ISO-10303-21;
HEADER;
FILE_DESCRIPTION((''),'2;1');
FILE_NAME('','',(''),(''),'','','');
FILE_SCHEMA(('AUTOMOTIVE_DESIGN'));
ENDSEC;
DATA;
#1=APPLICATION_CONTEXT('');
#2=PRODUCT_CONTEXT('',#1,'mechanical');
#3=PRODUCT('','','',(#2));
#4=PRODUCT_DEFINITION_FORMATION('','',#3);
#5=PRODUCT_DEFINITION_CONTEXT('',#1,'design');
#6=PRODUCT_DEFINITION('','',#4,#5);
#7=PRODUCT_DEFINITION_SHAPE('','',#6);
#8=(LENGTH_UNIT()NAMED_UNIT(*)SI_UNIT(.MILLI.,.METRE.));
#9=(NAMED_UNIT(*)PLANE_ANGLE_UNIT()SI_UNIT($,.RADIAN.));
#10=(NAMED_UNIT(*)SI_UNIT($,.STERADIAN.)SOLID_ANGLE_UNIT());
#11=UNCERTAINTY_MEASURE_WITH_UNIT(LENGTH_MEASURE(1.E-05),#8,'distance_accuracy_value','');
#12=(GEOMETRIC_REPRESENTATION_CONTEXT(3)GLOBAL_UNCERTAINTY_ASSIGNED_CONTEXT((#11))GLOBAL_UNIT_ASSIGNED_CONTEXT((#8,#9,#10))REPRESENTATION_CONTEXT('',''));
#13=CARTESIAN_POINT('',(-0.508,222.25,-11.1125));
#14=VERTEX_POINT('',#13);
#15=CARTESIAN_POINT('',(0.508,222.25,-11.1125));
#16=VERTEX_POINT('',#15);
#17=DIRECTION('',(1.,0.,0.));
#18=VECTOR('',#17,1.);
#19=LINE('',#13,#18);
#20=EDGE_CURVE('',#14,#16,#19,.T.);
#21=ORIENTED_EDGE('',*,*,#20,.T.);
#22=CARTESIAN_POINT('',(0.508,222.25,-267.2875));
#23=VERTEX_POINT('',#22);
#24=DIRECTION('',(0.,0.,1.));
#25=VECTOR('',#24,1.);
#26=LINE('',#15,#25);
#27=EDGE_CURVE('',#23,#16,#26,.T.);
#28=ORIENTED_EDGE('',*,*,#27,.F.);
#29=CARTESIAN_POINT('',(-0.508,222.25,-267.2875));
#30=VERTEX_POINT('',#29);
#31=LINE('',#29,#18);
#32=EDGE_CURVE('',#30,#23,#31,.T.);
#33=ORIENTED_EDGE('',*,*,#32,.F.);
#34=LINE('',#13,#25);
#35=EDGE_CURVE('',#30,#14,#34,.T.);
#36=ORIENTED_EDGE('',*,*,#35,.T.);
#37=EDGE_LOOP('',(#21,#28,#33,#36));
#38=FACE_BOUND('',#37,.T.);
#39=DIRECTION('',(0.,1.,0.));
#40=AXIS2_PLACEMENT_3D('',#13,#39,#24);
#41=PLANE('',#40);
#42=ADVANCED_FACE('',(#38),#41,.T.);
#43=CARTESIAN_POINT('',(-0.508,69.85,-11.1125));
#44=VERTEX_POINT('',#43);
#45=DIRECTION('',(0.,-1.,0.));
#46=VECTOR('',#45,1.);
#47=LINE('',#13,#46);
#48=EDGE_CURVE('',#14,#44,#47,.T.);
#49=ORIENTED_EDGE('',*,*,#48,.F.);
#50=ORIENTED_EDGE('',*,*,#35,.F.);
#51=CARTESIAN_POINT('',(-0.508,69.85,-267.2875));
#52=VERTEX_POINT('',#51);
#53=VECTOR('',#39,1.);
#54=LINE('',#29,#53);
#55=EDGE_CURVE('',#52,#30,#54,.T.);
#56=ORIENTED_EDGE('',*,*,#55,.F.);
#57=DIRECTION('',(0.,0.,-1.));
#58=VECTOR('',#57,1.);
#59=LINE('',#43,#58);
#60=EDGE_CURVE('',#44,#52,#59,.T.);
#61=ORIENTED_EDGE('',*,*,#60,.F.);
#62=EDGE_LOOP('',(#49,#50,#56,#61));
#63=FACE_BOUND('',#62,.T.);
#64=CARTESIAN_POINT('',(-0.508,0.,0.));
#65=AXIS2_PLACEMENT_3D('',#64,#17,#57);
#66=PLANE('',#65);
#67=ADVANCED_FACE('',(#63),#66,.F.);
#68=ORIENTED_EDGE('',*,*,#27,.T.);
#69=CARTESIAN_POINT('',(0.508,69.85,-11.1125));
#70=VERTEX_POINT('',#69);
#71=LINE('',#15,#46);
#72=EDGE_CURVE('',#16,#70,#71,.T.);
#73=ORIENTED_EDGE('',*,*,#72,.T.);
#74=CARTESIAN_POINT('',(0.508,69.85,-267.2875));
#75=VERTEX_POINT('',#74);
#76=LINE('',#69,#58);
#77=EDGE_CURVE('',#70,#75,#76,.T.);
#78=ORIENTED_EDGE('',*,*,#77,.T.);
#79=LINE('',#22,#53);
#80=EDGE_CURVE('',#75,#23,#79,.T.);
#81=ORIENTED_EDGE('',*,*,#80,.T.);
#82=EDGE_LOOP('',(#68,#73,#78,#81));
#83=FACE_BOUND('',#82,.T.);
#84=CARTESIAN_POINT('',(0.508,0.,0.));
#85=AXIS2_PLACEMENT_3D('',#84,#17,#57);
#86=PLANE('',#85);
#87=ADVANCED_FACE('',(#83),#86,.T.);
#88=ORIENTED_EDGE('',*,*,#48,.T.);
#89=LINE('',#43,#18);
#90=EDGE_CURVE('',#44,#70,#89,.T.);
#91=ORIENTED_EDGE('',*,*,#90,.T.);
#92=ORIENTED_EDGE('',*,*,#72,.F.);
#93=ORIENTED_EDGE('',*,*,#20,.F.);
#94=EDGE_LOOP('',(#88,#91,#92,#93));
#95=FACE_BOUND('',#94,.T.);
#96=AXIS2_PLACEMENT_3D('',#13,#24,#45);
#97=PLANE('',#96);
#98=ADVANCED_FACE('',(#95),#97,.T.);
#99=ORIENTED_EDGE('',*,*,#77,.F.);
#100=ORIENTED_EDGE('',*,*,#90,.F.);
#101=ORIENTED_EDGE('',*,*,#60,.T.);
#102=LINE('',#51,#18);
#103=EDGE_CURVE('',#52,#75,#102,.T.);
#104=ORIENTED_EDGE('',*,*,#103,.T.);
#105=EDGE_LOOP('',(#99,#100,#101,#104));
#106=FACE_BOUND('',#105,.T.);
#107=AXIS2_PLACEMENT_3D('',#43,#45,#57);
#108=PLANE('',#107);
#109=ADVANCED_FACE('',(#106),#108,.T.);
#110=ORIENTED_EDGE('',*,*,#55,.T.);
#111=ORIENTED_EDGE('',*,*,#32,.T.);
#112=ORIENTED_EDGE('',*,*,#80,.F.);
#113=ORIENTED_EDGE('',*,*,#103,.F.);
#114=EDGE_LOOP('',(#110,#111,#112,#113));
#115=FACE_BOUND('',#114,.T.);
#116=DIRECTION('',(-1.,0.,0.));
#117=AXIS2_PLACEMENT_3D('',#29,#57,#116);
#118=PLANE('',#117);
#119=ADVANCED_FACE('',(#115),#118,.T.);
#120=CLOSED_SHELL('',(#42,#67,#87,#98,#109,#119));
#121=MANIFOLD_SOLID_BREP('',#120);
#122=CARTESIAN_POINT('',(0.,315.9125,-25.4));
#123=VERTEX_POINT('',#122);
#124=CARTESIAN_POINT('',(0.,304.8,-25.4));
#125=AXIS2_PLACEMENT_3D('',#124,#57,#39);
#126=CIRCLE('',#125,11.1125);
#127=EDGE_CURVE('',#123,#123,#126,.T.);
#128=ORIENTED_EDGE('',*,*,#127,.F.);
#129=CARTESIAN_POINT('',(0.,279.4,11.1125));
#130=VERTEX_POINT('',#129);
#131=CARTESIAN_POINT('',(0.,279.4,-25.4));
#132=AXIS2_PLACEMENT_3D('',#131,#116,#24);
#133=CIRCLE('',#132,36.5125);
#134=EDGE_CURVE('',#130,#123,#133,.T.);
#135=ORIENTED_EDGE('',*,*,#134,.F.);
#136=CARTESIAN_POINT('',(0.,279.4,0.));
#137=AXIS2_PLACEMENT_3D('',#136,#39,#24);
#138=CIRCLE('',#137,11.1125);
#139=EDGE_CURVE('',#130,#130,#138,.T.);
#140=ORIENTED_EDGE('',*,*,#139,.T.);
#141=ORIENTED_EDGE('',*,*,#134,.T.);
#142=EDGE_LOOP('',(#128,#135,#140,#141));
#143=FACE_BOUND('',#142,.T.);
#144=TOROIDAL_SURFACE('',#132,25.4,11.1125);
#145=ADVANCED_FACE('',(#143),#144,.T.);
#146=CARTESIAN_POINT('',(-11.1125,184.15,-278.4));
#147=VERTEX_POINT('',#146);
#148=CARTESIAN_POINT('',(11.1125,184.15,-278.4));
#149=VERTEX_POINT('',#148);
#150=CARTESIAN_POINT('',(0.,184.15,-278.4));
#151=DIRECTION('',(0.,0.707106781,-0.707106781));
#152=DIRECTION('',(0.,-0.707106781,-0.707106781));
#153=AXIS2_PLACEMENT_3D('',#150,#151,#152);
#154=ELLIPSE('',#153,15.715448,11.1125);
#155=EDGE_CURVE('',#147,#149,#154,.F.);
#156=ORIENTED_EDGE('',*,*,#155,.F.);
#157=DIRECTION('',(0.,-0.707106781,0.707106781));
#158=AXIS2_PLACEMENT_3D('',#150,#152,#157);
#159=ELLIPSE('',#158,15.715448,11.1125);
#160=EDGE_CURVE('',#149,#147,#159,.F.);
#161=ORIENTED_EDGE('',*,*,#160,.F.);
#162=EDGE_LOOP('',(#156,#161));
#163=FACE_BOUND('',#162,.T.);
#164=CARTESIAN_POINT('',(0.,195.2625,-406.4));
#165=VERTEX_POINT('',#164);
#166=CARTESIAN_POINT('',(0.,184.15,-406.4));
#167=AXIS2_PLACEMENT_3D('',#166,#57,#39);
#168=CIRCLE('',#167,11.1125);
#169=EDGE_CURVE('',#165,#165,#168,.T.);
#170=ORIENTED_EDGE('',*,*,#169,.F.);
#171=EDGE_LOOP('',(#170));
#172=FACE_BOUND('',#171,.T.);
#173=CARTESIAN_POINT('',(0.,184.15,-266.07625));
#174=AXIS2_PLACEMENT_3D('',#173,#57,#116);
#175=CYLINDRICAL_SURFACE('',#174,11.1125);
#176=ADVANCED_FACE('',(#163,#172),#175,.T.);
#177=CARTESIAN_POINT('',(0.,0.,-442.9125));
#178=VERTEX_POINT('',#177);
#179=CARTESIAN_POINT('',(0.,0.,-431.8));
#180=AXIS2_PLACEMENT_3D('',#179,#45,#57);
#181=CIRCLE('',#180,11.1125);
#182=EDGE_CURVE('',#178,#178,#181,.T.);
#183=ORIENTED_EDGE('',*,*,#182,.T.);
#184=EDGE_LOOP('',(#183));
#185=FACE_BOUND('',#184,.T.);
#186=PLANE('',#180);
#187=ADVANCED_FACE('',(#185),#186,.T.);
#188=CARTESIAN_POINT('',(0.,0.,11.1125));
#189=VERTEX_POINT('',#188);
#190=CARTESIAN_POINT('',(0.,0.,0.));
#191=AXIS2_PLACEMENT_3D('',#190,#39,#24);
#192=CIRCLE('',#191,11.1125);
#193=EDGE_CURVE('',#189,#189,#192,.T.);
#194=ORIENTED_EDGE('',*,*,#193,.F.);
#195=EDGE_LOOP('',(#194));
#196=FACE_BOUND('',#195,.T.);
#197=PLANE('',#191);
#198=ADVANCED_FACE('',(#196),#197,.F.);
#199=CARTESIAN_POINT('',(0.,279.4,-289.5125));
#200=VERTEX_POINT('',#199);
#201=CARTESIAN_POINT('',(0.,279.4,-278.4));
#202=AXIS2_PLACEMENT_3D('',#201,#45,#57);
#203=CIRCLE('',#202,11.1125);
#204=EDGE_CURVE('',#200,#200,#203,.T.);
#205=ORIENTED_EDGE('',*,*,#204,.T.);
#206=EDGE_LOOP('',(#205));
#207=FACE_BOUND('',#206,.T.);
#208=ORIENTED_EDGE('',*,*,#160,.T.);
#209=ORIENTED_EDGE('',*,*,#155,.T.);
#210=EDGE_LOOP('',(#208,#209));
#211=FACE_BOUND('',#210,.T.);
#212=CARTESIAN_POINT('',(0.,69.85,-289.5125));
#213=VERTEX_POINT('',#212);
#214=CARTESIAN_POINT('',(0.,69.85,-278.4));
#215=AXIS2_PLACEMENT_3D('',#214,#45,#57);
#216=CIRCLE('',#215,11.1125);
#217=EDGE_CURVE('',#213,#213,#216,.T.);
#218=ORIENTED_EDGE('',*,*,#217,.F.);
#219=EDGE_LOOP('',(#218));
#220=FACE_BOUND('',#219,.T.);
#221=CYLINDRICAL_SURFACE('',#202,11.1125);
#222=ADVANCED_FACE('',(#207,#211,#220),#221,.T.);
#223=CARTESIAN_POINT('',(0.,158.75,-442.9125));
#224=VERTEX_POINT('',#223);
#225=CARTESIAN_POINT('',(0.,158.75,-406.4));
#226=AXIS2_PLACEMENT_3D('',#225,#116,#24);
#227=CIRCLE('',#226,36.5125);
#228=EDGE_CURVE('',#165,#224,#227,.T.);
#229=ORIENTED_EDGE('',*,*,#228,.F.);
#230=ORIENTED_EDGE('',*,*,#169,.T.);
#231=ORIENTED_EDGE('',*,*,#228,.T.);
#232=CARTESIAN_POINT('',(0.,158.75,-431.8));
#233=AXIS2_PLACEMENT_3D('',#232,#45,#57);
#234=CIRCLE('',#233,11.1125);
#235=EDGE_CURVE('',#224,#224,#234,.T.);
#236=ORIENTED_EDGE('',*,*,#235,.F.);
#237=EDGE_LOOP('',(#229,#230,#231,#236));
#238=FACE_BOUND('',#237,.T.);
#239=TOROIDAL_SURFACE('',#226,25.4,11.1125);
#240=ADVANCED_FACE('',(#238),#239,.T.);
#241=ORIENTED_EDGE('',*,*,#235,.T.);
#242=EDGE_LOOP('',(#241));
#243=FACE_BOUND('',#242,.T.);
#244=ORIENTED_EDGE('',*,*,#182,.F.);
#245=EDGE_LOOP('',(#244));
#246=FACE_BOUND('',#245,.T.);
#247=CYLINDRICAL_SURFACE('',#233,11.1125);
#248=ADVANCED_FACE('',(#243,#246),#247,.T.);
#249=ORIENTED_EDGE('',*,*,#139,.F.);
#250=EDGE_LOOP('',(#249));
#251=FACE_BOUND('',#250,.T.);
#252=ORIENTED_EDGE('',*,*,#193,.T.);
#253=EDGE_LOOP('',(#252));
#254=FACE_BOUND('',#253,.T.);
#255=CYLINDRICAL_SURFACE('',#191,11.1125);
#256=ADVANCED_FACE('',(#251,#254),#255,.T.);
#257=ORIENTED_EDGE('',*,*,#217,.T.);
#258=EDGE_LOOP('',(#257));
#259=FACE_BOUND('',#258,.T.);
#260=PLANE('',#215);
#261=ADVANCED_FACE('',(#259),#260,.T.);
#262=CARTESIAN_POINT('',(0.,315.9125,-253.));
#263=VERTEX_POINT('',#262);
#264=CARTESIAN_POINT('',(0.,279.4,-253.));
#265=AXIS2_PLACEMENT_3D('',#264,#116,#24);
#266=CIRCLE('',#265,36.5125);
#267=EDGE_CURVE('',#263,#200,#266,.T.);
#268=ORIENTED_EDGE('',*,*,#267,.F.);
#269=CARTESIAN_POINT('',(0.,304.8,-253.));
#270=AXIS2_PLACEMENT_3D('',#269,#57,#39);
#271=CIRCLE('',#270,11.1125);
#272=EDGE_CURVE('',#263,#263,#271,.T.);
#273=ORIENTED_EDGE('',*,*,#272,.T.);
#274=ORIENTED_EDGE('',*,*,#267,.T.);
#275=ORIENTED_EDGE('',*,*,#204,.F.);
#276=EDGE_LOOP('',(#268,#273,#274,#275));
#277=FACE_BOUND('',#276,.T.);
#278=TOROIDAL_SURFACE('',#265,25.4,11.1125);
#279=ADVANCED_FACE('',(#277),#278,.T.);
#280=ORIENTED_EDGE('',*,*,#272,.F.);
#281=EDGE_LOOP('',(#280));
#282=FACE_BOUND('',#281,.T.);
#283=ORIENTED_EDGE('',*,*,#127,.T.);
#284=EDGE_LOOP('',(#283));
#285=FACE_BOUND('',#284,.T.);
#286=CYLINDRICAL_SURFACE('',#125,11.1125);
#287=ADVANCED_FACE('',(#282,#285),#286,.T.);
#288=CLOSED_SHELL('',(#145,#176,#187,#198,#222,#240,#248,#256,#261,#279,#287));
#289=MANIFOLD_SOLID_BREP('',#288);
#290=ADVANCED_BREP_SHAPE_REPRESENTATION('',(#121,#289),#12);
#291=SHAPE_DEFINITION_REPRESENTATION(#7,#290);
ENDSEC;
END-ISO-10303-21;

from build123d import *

# Parameters (mm, degrees)
CROQUIS1_R                   = 11.1125
BARRER2_OUTLINE_W            = 11.1125
BARRER2_OUTLINE_H            = 209.55
SALIENTE_EXTRUIR1_DEPTH      = 0.508
SALIENTE_EXTRUIR1_DEPTH_BACK = 0.508
CROQUIS3_W                   = 256.175
CROQUIS3_H                   = 152.4


# Read off the part's stored shape, not the designer's step: Barrer2
with BuildPart() as part:
    # Barrer1: sweep along a path in Croquis2
    with BuildLine(Plane(origin=(0, 0, 0), x_dir=(0, 0, -1), z_dir=(1, 0, 0))) as barrer1_path:
        Line((0, 0), (0, 279.4))
        ThreePointArc((0, 279.4), (7.439487758, 297.360512242), (25.4, 304.8))
        Line((25.4, 304.8), (253, 304.8))
        ThreePointArc((253, 304.8), (270.960512242, 297.360512242), (278.4, 279.4))
        Line((278.4, 279.4), (278.4, 184.15))
        Line((278.4, 184.15), (406.4, 184.15))
        ThreePointArc((406.4, 184.15), (424.360512242, 176.710512242), (431.8, 158.75))
        Line((431.8, 158.75), (431.8, 0))
    # Croquis1 → Barrer1 (sweep)
    with BuildSketch(Plane(origin=(0, 0, 0), x_dir=(1, 0, 0), z_dir=(0, 1, 0))):
        Circle(CROQUIS1_R)
    sweep(path=barrer1_path.line, transition=Transition.RIGHT)

    # Barrer2 outline → Barrer2 (revolve)
    with BuildSketch(Plane.XY.offset(-278.4)):
        with Locations((5.55625, 174.625)):
            Rectangle(BARRER2_OUTLINE_W, BARRER2_OUTLINE_H)
    revolve(axis=Axis((0, 0, -278.4), (0, 1, 0)))


with BuildPart() as body_2:
    # Croquis3 → Saliente-Extruir1 (new, two sides: drawn at the far end of the back side and taken through both)
    with BuildSketch(Plane(origin=(0, 0, 0), x_dir=(0, 0, -1), z_dir=(1, 0, 0)).offset(-SALIENTE_EXTRUIR1_DEPTH_BACK)):
        with Locations((139.2, 146.05)):
            Rectangle(CROQUIS3_W, CROQUIS3_H)
    extrude(amount=SALIENTE_EXTRUIR1_DEPTH + SALIENTE_EXTRUIR1_DEPTH_BACK)


solid = Compound([part.part, body_2.part])
